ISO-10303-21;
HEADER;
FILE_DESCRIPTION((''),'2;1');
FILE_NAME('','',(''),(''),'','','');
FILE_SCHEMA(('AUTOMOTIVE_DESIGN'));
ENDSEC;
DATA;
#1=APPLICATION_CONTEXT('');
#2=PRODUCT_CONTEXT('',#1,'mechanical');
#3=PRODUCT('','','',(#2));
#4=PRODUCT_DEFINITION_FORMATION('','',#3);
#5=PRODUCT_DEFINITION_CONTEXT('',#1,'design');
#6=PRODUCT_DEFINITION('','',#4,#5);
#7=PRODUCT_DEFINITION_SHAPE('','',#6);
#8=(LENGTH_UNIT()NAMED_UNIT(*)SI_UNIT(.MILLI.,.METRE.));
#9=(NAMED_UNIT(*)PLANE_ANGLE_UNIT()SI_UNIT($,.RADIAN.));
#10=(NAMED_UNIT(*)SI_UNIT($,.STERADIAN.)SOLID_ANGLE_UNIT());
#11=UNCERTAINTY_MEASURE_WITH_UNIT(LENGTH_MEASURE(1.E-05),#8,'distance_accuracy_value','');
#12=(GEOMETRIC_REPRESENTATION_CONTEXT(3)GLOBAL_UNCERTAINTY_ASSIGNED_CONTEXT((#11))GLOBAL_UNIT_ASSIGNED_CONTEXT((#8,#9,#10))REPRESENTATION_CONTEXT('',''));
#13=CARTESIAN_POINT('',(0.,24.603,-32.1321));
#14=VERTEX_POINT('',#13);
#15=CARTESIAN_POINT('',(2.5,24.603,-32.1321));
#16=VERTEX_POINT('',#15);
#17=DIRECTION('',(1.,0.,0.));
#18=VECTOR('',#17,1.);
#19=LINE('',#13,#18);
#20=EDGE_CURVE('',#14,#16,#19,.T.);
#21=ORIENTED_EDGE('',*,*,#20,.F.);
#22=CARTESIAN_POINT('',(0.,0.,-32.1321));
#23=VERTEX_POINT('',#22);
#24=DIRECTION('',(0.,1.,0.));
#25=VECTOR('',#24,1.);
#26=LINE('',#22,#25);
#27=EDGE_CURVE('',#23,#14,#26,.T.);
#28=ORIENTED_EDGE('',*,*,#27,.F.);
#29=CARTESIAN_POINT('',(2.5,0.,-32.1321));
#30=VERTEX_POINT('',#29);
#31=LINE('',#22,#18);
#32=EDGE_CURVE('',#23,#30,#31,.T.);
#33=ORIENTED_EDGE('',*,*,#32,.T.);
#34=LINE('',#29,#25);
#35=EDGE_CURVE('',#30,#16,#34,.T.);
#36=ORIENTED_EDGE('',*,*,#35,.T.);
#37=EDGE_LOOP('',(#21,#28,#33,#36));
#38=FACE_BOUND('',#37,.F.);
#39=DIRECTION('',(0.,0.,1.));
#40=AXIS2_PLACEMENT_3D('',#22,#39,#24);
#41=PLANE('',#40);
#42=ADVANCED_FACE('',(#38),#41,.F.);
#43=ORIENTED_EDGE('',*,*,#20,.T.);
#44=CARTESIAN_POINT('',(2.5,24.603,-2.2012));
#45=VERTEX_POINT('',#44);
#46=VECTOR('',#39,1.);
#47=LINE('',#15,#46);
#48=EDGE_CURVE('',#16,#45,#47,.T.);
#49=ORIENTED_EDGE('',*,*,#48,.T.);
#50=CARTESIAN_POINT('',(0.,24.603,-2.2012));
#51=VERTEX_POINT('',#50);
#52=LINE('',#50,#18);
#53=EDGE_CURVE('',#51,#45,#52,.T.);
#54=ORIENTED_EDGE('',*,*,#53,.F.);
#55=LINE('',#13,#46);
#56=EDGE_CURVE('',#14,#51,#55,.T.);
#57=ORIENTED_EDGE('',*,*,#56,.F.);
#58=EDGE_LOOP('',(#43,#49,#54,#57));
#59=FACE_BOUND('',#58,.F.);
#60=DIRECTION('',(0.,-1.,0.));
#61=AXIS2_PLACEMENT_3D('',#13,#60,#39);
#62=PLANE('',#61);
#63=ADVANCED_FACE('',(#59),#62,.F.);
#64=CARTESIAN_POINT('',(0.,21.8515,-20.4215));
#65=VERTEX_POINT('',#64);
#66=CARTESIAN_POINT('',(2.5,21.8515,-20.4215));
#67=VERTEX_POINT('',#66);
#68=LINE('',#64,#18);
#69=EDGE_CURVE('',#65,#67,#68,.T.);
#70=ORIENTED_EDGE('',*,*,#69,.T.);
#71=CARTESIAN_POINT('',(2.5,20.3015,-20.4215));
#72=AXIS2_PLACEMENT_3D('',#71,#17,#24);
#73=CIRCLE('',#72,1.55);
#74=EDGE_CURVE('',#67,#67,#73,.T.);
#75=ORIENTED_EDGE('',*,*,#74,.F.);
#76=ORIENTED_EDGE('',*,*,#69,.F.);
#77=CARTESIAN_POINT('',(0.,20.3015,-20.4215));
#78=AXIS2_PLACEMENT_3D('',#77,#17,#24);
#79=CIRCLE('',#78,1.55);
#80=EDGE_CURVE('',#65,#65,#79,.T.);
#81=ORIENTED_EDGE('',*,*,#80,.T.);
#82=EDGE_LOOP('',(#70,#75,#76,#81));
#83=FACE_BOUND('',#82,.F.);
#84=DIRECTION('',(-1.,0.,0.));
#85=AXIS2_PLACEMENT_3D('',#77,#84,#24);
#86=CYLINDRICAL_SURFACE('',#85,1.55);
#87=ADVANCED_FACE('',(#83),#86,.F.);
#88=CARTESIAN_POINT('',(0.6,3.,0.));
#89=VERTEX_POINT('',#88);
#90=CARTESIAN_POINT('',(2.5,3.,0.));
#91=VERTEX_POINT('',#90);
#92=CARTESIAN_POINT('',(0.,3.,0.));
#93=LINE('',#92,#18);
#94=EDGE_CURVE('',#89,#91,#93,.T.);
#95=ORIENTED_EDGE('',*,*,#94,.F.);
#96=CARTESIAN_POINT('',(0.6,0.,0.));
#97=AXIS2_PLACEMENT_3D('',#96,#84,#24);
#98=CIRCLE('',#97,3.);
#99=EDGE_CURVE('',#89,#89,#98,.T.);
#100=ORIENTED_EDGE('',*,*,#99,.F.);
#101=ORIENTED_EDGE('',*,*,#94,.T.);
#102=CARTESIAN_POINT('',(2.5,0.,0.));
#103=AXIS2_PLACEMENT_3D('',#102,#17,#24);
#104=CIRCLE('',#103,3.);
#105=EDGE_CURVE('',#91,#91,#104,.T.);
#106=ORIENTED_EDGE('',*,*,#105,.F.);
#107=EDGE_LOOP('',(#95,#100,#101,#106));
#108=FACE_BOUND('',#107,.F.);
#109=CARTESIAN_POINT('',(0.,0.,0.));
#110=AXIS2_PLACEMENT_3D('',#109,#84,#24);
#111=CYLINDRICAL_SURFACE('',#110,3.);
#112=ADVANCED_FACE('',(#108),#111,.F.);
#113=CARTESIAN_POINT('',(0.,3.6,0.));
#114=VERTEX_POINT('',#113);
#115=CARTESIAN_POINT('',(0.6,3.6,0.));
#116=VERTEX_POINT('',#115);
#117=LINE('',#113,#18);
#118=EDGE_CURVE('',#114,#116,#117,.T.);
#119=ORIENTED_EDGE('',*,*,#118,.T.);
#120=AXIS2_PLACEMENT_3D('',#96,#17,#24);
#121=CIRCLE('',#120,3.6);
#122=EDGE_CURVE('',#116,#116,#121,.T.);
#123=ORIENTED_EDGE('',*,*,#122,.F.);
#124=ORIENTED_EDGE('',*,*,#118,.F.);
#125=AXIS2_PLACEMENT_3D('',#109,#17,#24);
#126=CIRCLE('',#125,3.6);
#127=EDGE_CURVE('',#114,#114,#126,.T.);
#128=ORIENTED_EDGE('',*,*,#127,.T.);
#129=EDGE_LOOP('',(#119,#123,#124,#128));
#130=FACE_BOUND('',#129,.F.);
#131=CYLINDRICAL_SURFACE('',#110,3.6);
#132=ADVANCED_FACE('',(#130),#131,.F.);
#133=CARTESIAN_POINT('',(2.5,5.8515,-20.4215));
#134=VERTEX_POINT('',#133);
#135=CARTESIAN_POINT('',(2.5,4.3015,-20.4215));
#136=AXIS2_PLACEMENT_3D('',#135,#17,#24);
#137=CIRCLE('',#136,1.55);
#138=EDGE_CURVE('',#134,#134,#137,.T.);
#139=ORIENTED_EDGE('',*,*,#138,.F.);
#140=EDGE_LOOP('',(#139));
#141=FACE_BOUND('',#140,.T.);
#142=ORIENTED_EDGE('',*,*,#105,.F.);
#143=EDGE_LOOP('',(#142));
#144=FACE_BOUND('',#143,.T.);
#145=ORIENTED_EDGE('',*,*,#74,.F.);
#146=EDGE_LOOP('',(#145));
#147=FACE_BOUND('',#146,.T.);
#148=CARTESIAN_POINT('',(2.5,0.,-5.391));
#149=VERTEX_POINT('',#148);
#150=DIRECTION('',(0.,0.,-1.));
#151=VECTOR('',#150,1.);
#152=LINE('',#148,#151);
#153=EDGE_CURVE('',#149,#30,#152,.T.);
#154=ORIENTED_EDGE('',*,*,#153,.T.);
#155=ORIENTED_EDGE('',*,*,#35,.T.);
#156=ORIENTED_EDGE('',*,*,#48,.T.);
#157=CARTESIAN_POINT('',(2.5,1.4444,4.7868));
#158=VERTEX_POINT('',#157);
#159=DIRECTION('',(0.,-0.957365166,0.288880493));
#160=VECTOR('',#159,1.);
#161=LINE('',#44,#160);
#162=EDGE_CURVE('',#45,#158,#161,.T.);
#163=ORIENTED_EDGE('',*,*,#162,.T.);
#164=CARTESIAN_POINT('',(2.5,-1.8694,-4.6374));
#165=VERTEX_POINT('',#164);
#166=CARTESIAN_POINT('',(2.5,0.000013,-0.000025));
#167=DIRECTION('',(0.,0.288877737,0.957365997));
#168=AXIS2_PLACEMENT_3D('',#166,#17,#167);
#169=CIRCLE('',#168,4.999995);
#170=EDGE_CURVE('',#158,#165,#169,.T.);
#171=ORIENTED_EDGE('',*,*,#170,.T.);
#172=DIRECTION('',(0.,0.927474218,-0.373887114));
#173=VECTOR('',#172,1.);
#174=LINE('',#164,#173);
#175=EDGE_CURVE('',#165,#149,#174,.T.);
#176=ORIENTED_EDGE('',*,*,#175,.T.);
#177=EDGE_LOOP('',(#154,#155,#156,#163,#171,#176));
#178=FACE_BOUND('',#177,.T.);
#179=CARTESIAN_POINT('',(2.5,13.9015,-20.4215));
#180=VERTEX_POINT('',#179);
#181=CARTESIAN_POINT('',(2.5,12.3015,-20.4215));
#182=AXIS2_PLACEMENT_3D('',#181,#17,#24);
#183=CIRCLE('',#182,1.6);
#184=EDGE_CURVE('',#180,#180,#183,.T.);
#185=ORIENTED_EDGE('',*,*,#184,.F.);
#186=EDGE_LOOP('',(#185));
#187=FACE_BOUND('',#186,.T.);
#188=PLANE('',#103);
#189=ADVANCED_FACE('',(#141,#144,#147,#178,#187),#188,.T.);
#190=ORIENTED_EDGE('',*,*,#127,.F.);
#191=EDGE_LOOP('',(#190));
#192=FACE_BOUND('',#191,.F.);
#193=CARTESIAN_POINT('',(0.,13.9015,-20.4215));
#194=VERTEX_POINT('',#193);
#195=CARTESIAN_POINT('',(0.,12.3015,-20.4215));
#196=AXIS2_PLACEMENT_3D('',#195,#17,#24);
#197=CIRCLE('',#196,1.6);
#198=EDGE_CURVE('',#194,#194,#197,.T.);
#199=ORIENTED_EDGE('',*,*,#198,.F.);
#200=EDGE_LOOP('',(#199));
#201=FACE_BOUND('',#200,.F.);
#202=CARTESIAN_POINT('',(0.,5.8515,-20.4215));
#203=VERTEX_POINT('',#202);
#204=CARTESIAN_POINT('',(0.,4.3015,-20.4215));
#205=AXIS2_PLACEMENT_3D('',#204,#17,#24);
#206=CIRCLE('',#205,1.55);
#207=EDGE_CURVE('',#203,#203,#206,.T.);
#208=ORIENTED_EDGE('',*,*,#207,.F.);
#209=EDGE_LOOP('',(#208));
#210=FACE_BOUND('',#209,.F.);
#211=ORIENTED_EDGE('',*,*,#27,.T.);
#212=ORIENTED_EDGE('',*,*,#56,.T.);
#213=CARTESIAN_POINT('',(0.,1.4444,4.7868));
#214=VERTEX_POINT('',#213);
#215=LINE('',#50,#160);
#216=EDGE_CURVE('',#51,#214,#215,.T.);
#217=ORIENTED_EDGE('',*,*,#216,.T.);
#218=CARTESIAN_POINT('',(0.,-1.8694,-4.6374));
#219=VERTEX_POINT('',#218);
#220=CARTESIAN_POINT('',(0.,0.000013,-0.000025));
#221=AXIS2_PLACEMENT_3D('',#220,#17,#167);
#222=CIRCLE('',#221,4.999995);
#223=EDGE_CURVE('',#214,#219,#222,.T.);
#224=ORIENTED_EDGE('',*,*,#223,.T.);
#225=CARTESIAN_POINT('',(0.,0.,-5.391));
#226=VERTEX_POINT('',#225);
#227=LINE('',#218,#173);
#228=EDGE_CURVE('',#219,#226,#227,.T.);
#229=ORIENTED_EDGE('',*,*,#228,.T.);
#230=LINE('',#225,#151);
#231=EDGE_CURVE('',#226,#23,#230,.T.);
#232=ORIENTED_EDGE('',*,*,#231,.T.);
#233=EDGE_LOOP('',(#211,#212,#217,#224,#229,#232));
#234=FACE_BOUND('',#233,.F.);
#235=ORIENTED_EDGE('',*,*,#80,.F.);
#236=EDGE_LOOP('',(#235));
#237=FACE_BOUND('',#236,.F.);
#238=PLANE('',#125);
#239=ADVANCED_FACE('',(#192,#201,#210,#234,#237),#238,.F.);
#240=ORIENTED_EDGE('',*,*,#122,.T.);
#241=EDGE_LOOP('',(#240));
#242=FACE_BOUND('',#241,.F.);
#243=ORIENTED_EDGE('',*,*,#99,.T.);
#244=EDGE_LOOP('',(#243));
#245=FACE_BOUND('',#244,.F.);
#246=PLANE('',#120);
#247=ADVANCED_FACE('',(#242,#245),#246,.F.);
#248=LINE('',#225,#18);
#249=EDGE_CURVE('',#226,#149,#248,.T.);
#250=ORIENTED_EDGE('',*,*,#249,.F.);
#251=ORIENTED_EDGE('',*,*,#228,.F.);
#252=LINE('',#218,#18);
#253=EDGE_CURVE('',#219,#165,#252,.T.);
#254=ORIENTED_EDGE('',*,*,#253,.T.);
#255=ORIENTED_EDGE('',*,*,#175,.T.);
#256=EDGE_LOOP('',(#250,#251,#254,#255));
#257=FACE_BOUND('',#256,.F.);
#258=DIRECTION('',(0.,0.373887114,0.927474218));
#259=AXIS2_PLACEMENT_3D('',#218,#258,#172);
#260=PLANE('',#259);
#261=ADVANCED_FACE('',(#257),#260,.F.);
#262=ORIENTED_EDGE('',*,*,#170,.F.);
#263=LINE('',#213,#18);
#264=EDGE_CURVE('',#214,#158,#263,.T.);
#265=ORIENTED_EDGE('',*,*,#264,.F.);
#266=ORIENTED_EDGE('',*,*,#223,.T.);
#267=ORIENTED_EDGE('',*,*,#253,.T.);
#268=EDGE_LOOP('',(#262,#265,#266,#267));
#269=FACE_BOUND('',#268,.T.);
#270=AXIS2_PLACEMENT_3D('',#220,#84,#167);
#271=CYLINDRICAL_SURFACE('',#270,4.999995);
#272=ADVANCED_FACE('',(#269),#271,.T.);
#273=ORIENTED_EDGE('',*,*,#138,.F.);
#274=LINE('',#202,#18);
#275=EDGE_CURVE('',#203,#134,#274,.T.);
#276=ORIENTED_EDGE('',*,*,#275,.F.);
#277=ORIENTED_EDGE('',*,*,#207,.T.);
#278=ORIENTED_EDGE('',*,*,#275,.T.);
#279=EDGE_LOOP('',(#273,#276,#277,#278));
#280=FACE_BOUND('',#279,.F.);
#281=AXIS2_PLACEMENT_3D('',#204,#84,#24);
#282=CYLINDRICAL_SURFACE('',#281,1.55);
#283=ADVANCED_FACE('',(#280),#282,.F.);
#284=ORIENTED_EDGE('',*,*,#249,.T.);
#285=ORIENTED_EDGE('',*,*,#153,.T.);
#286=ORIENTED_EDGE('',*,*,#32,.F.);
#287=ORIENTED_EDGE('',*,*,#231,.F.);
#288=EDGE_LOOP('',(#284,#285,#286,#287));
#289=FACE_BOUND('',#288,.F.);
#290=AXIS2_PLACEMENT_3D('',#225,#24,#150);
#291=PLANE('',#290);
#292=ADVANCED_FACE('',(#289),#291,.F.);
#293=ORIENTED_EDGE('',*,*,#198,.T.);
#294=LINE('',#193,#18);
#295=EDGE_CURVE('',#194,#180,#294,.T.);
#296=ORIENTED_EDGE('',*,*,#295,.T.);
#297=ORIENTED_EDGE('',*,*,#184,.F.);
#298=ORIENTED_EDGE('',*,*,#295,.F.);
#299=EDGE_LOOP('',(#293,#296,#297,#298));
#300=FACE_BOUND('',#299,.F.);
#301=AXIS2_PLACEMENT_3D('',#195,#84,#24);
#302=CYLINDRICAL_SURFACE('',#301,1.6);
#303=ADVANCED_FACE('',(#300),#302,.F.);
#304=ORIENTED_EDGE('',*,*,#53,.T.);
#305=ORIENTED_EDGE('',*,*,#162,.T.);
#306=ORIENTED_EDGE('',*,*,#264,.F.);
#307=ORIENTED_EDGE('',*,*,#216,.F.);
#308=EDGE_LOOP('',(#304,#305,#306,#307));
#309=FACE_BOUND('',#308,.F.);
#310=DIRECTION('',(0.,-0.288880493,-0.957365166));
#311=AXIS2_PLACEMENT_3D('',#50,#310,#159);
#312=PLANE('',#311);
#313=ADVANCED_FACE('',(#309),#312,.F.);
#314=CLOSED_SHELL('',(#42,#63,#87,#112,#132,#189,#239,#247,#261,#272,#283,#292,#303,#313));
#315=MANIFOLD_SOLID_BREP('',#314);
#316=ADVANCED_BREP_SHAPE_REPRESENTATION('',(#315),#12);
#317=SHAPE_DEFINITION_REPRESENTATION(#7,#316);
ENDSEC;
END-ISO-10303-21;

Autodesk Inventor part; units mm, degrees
ref_plane "YZ Plane" through (0, 0, 0) normal (1, 0, 0) x (0, 1, 0)
ref_plane "XZ Plane" through (0, 0, 0) normal (0, 1, 0) x (-1, 0, 0)
ref_plane "XY Plane" through (0, 0, 0) normal (0, 0, 1) x (1, 0, 0)
sketch "スケッチ1" plane through (0, 0, 0) normal (1, 0, 0) x (0, 1, 0)
  circle A0 centre (0, 0) radius 5 construction
  circle A1 centre (0, 0) radius 3.6
  arc A2 (1.4444, 4.7868) -> (-1.8694, -4.6374) centre (0, 0) ccw
  line L0 (-1.8694, -4.6374) -> (0, -5.391)
  line L1 (0, -5.391) -> (0, -32.1321)
  line L2 (0, -32.1321) -> (24.603, -32.1321)
  line L3 (24.603, -32.1321) -> (24.603, -2.2012)
  line L4 (24.603, -2.2012) -> (1.4444, 4.7868)
  circle A3 centre (0, 0) radius 3
  circle A4 centre (12.3015, -20.4215) radius 1.6
  circle A5 centre (12.3015, -20.4215) radius 8 construction
  circle A6 centre (20.3015, -20.4215) radius 1.55
  line L5 (20.3015, -20.4215) -> (4.3015, -20.4215) construction
  circle A7 centre (4.3015, -20.4215) radius 1.55
  circle A8 centre (12.3015, -20.4215) radius 14 construction
  dimension "d1" = 10
  dimension "d0" = 7.2
  dimension "d4" = 6
  dimension "d7" = 3.2
  dimension "d8" = 16
  dimension "d9" = 3.1
  dimension "d10" = 28
extrude "押し出し1" add sketch "スケッチ1" along normal blind 2.5 contours A1 | L4 L3 L2 L1 L0 A2
extrude "押し出し2" cut sketch "スケッチ1" along normal blind 0.6 contours A1 | A3
properties part number "Gear_Frame"
